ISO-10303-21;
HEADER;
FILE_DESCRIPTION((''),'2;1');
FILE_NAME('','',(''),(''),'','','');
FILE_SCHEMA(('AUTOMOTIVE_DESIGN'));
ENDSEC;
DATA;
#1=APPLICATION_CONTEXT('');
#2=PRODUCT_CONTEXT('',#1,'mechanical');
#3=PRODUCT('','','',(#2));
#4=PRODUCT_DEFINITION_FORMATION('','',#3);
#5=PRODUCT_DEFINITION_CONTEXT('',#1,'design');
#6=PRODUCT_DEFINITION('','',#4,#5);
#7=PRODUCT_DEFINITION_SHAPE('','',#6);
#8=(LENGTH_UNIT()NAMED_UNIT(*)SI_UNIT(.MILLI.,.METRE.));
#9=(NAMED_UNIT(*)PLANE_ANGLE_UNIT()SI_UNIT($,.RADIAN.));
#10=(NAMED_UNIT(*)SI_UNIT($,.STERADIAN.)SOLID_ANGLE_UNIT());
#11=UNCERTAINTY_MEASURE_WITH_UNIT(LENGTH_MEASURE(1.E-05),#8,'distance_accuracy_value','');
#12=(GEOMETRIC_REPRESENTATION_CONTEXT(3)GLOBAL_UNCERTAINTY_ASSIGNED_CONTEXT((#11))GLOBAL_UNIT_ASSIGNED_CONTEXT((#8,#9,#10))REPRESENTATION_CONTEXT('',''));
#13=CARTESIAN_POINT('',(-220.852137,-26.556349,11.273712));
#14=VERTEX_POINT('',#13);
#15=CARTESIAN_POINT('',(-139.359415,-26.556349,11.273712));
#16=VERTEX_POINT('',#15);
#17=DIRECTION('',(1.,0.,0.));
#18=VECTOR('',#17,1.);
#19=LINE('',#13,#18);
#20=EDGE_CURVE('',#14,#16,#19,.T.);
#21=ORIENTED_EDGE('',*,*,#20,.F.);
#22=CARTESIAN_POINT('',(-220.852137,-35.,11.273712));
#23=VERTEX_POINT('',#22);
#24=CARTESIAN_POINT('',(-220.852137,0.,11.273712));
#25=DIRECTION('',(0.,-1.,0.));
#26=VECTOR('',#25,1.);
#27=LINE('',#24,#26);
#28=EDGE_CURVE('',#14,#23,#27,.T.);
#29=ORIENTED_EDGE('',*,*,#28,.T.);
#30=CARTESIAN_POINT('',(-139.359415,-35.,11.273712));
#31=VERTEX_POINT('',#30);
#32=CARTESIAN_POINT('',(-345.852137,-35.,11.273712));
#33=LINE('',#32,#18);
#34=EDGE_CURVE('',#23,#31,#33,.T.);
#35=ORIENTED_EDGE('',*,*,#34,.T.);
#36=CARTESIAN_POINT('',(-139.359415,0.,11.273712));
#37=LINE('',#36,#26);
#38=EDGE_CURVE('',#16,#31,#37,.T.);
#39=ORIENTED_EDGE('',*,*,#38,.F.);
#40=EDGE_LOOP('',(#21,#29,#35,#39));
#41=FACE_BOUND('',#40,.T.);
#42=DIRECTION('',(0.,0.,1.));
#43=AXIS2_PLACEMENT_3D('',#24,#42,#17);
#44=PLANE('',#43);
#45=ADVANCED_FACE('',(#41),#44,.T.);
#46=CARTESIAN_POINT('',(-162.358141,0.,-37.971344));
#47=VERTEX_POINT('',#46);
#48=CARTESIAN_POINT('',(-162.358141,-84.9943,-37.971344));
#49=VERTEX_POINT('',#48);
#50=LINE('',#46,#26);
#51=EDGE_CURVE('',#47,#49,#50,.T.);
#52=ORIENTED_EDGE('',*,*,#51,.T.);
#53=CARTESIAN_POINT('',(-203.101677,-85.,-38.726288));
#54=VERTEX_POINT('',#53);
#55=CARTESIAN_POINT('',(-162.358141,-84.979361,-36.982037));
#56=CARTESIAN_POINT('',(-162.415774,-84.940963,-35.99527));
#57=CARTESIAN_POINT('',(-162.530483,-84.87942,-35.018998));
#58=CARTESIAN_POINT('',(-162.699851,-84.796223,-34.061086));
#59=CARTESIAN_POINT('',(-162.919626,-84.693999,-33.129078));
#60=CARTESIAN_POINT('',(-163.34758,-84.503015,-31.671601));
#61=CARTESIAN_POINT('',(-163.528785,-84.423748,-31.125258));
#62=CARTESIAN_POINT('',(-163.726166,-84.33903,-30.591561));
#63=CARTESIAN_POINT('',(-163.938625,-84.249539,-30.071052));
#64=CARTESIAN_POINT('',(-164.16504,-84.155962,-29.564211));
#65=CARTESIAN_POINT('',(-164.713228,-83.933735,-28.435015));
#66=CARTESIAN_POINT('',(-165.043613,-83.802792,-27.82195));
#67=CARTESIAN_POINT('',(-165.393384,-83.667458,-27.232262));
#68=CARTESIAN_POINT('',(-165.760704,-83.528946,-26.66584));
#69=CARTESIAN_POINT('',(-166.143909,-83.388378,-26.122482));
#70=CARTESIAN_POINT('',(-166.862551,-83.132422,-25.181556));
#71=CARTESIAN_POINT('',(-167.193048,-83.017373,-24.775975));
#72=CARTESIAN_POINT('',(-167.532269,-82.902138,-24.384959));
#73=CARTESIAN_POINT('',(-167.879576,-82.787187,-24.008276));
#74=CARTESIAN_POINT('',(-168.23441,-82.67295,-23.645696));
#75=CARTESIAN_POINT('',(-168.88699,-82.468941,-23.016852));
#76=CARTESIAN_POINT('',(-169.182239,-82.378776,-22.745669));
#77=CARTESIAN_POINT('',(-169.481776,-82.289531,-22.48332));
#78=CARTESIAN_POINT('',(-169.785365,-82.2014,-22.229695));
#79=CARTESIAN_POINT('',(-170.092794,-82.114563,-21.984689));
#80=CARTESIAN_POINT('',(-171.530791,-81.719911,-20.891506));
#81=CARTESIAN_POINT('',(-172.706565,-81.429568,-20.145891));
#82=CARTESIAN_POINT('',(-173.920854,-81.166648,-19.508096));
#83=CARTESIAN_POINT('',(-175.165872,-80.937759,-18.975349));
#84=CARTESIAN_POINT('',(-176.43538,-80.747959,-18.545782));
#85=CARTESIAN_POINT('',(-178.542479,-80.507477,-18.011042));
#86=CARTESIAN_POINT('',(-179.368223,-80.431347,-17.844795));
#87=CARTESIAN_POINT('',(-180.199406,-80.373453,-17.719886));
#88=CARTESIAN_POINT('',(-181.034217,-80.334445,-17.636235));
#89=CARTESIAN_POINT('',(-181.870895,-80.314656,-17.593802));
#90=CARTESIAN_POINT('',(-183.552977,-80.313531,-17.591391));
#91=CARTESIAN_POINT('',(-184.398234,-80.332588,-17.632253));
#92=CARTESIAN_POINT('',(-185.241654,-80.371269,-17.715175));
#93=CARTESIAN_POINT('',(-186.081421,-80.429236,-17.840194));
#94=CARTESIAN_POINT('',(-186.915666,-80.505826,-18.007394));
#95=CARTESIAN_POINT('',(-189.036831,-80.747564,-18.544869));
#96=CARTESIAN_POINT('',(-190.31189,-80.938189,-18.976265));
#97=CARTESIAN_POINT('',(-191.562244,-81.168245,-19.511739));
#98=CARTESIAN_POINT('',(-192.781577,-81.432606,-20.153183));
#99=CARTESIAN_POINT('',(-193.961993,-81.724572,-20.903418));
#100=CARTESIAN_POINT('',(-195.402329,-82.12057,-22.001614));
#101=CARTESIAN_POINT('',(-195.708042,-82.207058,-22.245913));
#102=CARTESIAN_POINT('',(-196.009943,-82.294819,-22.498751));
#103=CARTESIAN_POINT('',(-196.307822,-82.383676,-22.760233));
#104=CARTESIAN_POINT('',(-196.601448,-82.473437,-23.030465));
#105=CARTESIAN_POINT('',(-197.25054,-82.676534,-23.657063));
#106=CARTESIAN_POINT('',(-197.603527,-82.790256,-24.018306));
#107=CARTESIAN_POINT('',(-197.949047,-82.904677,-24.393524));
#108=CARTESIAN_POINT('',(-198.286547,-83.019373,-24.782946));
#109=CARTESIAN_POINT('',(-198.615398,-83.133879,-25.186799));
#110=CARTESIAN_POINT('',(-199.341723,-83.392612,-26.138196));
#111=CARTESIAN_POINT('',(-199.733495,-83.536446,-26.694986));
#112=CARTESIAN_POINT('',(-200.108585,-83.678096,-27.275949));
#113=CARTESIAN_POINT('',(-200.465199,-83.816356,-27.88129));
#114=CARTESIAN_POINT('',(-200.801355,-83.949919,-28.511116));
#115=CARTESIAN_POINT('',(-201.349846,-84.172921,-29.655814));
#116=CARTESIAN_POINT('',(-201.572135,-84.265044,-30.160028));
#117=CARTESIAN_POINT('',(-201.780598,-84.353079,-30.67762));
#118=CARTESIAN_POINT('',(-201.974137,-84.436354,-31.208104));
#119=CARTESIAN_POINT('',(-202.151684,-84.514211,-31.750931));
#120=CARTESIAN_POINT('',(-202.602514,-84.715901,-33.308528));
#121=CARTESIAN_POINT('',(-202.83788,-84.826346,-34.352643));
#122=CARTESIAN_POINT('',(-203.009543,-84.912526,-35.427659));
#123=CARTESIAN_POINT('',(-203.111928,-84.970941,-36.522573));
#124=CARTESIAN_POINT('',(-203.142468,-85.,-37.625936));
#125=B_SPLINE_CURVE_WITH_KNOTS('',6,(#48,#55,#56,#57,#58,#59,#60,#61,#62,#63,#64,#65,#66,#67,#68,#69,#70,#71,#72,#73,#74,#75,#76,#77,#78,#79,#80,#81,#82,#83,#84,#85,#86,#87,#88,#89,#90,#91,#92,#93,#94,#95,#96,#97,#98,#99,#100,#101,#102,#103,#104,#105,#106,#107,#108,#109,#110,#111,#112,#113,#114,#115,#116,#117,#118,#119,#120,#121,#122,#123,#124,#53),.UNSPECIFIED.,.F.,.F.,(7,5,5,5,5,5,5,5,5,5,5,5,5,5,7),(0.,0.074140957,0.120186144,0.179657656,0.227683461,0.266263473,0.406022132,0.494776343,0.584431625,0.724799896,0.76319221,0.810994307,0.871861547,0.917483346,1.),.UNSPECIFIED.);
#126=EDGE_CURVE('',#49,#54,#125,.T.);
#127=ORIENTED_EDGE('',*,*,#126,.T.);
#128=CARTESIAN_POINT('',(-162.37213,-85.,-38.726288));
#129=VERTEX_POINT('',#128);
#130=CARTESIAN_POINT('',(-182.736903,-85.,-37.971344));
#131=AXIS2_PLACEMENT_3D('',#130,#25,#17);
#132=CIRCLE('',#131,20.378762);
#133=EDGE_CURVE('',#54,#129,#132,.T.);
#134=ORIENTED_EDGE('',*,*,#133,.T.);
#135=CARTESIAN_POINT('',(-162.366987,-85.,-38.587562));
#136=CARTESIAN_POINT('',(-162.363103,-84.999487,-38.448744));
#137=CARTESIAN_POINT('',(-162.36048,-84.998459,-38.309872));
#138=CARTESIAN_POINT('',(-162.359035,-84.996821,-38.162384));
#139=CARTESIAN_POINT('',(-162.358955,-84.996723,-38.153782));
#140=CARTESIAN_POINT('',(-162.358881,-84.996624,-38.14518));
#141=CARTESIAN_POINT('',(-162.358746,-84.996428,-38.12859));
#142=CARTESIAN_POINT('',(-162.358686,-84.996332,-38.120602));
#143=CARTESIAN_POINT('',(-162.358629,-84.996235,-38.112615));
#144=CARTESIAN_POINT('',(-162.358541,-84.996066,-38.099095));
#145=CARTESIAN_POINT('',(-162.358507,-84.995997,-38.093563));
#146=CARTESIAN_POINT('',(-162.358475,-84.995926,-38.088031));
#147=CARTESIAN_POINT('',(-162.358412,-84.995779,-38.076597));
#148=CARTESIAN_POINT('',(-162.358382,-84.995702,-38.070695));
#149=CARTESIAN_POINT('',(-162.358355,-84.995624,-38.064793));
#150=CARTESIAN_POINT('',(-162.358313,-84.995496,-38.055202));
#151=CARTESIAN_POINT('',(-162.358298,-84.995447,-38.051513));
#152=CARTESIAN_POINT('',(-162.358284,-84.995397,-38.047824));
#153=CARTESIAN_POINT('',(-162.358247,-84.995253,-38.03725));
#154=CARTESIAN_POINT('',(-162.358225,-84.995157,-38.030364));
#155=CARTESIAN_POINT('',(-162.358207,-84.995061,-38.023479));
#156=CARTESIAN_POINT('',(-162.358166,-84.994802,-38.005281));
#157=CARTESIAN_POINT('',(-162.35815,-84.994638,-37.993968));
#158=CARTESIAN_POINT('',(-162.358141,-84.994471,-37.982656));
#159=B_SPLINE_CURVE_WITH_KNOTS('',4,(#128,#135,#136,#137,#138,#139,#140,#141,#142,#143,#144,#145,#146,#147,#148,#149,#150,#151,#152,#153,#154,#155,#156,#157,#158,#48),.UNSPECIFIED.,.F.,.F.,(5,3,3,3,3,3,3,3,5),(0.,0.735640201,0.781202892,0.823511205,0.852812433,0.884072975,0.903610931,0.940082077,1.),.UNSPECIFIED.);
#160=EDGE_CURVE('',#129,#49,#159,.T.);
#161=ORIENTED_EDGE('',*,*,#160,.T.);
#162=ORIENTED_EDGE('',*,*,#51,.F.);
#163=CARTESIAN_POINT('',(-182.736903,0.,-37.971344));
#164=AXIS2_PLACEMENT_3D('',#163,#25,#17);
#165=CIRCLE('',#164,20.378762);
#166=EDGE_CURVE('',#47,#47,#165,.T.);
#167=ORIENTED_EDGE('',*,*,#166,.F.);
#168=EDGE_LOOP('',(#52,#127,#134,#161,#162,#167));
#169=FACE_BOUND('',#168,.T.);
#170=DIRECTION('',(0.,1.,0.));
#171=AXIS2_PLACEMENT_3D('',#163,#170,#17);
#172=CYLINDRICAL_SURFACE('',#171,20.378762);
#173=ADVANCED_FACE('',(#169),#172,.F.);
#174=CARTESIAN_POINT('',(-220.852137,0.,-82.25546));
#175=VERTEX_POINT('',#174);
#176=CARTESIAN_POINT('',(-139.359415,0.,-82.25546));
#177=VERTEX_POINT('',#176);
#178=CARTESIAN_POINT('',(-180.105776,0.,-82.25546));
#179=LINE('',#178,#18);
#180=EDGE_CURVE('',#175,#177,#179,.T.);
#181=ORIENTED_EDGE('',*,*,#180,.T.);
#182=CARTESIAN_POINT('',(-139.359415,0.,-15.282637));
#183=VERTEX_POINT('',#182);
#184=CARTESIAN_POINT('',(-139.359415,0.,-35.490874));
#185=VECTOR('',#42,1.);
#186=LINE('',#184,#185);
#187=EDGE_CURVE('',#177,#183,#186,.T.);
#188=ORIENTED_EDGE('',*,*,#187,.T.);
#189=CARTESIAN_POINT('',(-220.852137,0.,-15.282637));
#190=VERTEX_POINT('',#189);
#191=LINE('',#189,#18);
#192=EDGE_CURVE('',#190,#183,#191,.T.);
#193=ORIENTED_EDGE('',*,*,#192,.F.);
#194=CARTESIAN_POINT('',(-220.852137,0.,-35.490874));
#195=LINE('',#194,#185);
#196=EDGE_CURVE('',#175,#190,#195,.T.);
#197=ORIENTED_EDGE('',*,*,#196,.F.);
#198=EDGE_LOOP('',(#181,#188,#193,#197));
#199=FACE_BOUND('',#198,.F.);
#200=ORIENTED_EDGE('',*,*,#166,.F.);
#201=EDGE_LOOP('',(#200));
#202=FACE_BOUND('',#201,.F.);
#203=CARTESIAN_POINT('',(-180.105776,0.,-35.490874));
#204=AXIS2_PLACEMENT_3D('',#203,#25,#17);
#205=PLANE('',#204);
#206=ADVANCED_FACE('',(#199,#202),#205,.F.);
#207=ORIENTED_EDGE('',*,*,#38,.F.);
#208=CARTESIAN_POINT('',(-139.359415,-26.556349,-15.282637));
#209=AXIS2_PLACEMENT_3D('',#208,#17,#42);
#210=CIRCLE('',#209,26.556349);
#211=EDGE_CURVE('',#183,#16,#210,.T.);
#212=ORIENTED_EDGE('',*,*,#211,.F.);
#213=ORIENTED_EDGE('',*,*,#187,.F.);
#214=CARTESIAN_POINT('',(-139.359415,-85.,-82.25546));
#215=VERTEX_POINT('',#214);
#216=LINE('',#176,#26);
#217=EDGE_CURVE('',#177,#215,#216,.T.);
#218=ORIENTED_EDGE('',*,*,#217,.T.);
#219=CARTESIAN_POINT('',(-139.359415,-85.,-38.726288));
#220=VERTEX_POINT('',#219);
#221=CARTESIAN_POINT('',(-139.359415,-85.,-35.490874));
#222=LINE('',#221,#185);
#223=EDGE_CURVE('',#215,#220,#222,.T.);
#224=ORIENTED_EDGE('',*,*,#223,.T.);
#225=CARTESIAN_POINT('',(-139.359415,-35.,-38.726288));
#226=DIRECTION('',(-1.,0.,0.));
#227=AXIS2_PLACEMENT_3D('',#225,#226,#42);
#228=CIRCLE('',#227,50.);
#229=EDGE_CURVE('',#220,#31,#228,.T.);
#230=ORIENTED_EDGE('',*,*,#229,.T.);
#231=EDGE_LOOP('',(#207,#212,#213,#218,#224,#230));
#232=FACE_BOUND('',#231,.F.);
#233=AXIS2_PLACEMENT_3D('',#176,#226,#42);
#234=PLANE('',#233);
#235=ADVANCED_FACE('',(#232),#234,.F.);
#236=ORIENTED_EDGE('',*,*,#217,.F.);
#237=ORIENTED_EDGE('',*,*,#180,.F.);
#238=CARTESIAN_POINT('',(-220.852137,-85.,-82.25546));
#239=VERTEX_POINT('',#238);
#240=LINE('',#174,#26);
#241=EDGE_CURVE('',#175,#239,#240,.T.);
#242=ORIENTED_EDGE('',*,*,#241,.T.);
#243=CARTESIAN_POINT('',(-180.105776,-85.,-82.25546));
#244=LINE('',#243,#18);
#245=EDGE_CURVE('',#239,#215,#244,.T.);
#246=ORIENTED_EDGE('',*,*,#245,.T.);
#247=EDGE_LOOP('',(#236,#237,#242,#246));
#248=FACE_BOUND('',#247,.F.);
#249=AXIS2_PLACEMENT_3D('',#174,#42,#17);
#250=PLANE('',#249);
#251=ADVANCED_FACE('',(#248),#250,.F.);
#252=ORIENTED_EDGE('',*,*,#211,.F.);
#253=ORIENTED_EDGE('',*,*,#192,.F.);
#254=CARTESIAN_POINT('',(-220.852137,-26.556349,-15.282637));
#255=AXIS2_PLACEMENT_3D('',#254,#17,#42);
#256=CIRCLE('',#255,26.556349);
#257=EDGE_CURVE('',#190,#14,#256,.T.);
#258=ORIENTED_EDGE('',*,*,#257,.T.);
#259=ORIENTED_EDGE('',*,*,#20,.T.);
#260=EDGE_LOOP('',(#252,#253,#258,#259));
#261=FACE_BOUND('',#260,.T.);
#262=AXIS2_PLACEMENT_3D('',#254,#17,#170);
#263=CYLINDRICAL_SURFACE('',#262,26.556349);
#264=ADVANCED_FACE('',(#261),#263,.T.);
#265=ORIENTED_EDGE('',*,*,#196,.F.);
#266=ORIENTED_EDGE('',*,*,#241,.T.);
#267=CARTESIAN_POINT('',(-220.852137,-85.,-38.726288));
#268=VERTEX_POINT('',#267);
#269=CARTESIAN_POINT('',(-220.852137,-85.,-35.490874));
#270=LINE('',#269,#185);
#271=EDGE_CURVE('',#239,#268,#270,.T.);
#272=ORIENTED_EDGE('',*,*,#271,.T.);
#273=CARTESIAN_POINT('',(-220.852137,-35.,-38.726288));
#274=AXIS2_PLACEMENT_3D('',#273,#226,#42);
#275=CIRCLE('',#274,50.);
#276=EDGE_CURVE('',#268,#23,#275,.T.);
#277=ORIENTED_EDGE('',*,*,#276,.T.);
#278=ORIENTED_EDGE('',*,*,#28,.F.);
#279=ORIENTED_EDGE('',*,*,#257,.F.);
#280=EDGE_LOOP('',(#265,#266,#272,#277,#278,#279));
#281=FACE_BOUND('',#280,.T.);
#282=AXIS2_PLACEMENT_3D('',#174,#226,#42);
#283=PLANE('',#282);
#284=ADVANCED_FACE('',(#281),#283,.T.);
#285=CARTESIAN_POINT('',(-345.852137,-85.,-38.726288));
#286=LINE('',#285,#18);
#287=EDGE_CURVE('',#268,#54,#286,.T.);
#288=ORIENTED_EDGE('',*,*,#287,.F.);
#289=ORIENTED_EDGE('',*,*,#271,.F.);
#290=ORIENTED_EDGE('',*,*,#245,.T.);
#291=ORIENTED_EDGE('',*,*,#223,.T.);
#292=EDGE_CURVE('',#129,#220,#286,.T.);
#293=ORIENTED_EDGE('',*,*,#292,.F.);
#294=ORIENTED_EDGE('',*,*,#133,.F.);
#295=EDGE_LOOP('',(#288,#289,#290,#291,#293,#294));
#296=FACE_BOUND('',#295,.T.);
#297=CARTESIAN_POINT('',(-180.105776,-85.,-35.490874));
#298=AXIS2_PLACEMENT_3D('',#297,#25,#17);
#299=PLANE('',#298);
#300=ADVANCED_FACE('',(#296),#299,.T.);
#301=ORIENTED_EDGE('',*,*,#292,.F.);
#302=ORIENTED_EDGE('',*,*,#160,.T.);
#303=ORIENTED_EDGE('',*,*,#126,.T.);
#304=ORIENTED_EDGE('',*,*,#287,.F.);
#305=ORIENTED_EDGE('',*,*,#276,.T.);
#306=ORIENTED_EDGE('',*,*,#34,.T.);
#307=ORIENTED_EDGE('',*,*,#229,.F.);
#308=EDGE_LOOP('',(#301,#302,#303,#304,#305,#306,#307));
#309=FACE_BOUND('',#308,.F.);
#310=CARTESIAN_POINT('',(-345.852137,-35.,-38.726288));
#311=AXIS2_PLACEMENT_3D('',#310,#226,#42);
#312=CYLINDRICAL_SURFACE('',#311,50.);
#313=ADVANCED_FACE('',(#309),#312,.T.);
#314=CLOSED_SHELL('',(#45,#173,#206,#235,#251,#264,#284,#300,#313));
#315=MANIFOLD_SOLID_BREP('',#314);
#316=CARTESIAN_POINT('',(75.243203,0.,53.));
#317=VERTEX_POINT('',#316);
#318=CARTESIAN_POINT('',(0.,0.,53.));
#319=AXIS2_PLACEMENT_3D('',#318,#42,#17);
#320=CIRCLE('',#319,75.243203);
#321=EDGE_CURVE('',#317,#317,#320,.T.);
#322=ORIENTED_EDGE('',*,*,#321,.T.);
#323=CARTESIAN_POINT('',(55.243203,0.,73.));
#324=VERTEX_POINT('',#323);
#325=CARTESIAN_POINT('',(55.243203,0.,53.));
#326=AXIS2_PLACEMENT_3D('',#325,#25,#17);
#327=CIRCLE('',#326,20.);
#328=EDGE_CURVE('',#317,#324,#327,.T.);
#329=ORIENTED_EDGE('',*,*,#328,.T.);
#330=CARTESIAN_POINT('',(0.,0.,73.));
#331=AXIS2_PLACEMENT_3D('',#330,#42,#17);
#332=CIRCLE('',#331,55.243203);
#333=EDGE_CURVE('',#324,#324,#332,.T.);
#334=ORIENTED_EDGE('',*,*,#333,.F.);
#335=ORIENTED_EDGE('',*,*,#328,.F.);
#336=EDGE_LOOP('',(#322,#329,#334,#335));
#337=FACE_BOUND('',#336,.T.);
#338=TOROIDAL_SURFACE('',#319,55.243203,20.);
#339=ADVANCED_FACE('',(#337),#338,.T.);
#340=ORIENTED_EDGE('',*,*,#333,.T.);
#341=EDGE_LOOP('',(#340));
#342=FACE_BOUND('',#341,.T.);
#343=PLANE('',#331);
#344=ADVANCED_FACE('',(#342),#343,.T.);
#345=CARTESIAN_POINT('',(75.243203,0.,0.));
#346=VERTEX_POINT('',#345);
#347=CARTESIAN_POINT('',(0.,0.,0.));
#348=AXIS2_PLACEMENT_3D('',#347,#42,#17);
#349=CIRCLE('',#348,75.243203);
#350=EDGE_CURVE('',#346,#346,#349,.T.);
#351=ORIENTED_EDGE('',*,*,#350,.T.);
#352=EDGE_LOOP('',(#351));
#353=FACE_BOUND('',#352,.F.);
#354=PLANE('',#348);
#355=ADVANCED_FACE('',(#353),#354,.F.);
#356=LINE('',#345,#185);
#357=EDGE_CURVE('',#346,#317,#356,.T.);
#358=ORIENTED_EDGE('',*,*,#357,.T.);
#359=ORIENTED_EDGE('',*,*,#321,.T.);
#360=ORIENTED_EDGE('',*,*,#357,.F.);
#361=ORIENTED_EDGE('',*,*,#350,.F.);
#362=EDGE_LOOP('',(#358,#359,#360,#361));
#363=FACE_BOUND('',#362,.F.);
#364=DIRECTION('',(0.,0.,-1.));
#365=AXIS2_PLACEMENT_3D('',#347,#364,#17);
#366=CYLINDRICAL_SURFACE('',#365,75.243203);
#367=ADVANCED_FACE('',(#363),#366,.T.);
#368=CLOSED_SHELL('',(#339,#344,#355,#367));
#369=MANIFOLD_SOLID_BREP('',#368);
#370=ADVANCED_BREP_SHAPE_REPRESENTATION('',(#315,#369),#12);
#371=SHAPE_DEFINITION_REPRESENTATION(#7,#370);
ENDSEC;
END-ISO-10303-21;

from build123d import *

# Parameters (mm, degrees)
F0_R        = 75.2432025663
F1_DEPTH    = 73
F2_W        = 81.4927220345
F2_H        = 93.5291722417
F2_R        = 20.3787621881
F3_DEPTH    = 85
F4_T1_DEPTH = 331.4927220345
F5_R        = 26.5563491861
F6_R        = 20


# Not quite as in the source:
# - a fillet or chamfer that OpenCascade refuses, or shapes differently, is made with other operations: its cross-section is extruded or revolved along the edge and cut away or added


with BuildPart() as f1:
    # F0 (on Top) → F1 (new body)
    with BuildSketch(Plane.XY):
        Circle(F0_R)
    extrude(amount=F1_DEPTH)

    # F6
    f6_edges = [f1.edges().sort_by_distance(p)[0] for p in [
        (-75.243203, 0, 73),
    ]]
    fillet(f6_edges, radius=F6_R)


with BuildPart() as f3:
    # F2 (on Front) → F3 (new body)
    with BuildSketch(Plane.XZ):
        with Locations((-180.1057755947, -35.4908742011)):
            Rectangle(F2_W, F2_H)
        with Locations((-182.736903429, -37.9713438451)):
            Circle(F2_R, mode=Mode.SUBTRACT)
    extrude(amount=F3_DEPTH)

    # F4: fillet of radius 50 on 1 edges, made by hand

    # F4_s2 → F4_t1 (cut)
    with BuildSketch(Plane.YZ.offset(-345.8521366119)):
        with BuildLine():
            ThreePointArc((-35, 11.2737119198), (-70.3553390593, -3.3709490209), (-85, -38.7262880802))
            Line((-85, -38.7262880802), (-85, 11.2737119198))
            Line((-85, 11.2737119198), (-35, 11.2737119198))
        make_face()
    extrude(amount=F4_T1_DEPTH, mode=Mode.SUBTRACT)

    # F5
    f5_edges = [f3.edges().sort_by_distance(p)[0] for p in [
        (-180.105776, 0, 11.273712),
    ]]
    fillet(f5_edges, radius=F5_R)


solid = Compound([f1.part, f3.part])
